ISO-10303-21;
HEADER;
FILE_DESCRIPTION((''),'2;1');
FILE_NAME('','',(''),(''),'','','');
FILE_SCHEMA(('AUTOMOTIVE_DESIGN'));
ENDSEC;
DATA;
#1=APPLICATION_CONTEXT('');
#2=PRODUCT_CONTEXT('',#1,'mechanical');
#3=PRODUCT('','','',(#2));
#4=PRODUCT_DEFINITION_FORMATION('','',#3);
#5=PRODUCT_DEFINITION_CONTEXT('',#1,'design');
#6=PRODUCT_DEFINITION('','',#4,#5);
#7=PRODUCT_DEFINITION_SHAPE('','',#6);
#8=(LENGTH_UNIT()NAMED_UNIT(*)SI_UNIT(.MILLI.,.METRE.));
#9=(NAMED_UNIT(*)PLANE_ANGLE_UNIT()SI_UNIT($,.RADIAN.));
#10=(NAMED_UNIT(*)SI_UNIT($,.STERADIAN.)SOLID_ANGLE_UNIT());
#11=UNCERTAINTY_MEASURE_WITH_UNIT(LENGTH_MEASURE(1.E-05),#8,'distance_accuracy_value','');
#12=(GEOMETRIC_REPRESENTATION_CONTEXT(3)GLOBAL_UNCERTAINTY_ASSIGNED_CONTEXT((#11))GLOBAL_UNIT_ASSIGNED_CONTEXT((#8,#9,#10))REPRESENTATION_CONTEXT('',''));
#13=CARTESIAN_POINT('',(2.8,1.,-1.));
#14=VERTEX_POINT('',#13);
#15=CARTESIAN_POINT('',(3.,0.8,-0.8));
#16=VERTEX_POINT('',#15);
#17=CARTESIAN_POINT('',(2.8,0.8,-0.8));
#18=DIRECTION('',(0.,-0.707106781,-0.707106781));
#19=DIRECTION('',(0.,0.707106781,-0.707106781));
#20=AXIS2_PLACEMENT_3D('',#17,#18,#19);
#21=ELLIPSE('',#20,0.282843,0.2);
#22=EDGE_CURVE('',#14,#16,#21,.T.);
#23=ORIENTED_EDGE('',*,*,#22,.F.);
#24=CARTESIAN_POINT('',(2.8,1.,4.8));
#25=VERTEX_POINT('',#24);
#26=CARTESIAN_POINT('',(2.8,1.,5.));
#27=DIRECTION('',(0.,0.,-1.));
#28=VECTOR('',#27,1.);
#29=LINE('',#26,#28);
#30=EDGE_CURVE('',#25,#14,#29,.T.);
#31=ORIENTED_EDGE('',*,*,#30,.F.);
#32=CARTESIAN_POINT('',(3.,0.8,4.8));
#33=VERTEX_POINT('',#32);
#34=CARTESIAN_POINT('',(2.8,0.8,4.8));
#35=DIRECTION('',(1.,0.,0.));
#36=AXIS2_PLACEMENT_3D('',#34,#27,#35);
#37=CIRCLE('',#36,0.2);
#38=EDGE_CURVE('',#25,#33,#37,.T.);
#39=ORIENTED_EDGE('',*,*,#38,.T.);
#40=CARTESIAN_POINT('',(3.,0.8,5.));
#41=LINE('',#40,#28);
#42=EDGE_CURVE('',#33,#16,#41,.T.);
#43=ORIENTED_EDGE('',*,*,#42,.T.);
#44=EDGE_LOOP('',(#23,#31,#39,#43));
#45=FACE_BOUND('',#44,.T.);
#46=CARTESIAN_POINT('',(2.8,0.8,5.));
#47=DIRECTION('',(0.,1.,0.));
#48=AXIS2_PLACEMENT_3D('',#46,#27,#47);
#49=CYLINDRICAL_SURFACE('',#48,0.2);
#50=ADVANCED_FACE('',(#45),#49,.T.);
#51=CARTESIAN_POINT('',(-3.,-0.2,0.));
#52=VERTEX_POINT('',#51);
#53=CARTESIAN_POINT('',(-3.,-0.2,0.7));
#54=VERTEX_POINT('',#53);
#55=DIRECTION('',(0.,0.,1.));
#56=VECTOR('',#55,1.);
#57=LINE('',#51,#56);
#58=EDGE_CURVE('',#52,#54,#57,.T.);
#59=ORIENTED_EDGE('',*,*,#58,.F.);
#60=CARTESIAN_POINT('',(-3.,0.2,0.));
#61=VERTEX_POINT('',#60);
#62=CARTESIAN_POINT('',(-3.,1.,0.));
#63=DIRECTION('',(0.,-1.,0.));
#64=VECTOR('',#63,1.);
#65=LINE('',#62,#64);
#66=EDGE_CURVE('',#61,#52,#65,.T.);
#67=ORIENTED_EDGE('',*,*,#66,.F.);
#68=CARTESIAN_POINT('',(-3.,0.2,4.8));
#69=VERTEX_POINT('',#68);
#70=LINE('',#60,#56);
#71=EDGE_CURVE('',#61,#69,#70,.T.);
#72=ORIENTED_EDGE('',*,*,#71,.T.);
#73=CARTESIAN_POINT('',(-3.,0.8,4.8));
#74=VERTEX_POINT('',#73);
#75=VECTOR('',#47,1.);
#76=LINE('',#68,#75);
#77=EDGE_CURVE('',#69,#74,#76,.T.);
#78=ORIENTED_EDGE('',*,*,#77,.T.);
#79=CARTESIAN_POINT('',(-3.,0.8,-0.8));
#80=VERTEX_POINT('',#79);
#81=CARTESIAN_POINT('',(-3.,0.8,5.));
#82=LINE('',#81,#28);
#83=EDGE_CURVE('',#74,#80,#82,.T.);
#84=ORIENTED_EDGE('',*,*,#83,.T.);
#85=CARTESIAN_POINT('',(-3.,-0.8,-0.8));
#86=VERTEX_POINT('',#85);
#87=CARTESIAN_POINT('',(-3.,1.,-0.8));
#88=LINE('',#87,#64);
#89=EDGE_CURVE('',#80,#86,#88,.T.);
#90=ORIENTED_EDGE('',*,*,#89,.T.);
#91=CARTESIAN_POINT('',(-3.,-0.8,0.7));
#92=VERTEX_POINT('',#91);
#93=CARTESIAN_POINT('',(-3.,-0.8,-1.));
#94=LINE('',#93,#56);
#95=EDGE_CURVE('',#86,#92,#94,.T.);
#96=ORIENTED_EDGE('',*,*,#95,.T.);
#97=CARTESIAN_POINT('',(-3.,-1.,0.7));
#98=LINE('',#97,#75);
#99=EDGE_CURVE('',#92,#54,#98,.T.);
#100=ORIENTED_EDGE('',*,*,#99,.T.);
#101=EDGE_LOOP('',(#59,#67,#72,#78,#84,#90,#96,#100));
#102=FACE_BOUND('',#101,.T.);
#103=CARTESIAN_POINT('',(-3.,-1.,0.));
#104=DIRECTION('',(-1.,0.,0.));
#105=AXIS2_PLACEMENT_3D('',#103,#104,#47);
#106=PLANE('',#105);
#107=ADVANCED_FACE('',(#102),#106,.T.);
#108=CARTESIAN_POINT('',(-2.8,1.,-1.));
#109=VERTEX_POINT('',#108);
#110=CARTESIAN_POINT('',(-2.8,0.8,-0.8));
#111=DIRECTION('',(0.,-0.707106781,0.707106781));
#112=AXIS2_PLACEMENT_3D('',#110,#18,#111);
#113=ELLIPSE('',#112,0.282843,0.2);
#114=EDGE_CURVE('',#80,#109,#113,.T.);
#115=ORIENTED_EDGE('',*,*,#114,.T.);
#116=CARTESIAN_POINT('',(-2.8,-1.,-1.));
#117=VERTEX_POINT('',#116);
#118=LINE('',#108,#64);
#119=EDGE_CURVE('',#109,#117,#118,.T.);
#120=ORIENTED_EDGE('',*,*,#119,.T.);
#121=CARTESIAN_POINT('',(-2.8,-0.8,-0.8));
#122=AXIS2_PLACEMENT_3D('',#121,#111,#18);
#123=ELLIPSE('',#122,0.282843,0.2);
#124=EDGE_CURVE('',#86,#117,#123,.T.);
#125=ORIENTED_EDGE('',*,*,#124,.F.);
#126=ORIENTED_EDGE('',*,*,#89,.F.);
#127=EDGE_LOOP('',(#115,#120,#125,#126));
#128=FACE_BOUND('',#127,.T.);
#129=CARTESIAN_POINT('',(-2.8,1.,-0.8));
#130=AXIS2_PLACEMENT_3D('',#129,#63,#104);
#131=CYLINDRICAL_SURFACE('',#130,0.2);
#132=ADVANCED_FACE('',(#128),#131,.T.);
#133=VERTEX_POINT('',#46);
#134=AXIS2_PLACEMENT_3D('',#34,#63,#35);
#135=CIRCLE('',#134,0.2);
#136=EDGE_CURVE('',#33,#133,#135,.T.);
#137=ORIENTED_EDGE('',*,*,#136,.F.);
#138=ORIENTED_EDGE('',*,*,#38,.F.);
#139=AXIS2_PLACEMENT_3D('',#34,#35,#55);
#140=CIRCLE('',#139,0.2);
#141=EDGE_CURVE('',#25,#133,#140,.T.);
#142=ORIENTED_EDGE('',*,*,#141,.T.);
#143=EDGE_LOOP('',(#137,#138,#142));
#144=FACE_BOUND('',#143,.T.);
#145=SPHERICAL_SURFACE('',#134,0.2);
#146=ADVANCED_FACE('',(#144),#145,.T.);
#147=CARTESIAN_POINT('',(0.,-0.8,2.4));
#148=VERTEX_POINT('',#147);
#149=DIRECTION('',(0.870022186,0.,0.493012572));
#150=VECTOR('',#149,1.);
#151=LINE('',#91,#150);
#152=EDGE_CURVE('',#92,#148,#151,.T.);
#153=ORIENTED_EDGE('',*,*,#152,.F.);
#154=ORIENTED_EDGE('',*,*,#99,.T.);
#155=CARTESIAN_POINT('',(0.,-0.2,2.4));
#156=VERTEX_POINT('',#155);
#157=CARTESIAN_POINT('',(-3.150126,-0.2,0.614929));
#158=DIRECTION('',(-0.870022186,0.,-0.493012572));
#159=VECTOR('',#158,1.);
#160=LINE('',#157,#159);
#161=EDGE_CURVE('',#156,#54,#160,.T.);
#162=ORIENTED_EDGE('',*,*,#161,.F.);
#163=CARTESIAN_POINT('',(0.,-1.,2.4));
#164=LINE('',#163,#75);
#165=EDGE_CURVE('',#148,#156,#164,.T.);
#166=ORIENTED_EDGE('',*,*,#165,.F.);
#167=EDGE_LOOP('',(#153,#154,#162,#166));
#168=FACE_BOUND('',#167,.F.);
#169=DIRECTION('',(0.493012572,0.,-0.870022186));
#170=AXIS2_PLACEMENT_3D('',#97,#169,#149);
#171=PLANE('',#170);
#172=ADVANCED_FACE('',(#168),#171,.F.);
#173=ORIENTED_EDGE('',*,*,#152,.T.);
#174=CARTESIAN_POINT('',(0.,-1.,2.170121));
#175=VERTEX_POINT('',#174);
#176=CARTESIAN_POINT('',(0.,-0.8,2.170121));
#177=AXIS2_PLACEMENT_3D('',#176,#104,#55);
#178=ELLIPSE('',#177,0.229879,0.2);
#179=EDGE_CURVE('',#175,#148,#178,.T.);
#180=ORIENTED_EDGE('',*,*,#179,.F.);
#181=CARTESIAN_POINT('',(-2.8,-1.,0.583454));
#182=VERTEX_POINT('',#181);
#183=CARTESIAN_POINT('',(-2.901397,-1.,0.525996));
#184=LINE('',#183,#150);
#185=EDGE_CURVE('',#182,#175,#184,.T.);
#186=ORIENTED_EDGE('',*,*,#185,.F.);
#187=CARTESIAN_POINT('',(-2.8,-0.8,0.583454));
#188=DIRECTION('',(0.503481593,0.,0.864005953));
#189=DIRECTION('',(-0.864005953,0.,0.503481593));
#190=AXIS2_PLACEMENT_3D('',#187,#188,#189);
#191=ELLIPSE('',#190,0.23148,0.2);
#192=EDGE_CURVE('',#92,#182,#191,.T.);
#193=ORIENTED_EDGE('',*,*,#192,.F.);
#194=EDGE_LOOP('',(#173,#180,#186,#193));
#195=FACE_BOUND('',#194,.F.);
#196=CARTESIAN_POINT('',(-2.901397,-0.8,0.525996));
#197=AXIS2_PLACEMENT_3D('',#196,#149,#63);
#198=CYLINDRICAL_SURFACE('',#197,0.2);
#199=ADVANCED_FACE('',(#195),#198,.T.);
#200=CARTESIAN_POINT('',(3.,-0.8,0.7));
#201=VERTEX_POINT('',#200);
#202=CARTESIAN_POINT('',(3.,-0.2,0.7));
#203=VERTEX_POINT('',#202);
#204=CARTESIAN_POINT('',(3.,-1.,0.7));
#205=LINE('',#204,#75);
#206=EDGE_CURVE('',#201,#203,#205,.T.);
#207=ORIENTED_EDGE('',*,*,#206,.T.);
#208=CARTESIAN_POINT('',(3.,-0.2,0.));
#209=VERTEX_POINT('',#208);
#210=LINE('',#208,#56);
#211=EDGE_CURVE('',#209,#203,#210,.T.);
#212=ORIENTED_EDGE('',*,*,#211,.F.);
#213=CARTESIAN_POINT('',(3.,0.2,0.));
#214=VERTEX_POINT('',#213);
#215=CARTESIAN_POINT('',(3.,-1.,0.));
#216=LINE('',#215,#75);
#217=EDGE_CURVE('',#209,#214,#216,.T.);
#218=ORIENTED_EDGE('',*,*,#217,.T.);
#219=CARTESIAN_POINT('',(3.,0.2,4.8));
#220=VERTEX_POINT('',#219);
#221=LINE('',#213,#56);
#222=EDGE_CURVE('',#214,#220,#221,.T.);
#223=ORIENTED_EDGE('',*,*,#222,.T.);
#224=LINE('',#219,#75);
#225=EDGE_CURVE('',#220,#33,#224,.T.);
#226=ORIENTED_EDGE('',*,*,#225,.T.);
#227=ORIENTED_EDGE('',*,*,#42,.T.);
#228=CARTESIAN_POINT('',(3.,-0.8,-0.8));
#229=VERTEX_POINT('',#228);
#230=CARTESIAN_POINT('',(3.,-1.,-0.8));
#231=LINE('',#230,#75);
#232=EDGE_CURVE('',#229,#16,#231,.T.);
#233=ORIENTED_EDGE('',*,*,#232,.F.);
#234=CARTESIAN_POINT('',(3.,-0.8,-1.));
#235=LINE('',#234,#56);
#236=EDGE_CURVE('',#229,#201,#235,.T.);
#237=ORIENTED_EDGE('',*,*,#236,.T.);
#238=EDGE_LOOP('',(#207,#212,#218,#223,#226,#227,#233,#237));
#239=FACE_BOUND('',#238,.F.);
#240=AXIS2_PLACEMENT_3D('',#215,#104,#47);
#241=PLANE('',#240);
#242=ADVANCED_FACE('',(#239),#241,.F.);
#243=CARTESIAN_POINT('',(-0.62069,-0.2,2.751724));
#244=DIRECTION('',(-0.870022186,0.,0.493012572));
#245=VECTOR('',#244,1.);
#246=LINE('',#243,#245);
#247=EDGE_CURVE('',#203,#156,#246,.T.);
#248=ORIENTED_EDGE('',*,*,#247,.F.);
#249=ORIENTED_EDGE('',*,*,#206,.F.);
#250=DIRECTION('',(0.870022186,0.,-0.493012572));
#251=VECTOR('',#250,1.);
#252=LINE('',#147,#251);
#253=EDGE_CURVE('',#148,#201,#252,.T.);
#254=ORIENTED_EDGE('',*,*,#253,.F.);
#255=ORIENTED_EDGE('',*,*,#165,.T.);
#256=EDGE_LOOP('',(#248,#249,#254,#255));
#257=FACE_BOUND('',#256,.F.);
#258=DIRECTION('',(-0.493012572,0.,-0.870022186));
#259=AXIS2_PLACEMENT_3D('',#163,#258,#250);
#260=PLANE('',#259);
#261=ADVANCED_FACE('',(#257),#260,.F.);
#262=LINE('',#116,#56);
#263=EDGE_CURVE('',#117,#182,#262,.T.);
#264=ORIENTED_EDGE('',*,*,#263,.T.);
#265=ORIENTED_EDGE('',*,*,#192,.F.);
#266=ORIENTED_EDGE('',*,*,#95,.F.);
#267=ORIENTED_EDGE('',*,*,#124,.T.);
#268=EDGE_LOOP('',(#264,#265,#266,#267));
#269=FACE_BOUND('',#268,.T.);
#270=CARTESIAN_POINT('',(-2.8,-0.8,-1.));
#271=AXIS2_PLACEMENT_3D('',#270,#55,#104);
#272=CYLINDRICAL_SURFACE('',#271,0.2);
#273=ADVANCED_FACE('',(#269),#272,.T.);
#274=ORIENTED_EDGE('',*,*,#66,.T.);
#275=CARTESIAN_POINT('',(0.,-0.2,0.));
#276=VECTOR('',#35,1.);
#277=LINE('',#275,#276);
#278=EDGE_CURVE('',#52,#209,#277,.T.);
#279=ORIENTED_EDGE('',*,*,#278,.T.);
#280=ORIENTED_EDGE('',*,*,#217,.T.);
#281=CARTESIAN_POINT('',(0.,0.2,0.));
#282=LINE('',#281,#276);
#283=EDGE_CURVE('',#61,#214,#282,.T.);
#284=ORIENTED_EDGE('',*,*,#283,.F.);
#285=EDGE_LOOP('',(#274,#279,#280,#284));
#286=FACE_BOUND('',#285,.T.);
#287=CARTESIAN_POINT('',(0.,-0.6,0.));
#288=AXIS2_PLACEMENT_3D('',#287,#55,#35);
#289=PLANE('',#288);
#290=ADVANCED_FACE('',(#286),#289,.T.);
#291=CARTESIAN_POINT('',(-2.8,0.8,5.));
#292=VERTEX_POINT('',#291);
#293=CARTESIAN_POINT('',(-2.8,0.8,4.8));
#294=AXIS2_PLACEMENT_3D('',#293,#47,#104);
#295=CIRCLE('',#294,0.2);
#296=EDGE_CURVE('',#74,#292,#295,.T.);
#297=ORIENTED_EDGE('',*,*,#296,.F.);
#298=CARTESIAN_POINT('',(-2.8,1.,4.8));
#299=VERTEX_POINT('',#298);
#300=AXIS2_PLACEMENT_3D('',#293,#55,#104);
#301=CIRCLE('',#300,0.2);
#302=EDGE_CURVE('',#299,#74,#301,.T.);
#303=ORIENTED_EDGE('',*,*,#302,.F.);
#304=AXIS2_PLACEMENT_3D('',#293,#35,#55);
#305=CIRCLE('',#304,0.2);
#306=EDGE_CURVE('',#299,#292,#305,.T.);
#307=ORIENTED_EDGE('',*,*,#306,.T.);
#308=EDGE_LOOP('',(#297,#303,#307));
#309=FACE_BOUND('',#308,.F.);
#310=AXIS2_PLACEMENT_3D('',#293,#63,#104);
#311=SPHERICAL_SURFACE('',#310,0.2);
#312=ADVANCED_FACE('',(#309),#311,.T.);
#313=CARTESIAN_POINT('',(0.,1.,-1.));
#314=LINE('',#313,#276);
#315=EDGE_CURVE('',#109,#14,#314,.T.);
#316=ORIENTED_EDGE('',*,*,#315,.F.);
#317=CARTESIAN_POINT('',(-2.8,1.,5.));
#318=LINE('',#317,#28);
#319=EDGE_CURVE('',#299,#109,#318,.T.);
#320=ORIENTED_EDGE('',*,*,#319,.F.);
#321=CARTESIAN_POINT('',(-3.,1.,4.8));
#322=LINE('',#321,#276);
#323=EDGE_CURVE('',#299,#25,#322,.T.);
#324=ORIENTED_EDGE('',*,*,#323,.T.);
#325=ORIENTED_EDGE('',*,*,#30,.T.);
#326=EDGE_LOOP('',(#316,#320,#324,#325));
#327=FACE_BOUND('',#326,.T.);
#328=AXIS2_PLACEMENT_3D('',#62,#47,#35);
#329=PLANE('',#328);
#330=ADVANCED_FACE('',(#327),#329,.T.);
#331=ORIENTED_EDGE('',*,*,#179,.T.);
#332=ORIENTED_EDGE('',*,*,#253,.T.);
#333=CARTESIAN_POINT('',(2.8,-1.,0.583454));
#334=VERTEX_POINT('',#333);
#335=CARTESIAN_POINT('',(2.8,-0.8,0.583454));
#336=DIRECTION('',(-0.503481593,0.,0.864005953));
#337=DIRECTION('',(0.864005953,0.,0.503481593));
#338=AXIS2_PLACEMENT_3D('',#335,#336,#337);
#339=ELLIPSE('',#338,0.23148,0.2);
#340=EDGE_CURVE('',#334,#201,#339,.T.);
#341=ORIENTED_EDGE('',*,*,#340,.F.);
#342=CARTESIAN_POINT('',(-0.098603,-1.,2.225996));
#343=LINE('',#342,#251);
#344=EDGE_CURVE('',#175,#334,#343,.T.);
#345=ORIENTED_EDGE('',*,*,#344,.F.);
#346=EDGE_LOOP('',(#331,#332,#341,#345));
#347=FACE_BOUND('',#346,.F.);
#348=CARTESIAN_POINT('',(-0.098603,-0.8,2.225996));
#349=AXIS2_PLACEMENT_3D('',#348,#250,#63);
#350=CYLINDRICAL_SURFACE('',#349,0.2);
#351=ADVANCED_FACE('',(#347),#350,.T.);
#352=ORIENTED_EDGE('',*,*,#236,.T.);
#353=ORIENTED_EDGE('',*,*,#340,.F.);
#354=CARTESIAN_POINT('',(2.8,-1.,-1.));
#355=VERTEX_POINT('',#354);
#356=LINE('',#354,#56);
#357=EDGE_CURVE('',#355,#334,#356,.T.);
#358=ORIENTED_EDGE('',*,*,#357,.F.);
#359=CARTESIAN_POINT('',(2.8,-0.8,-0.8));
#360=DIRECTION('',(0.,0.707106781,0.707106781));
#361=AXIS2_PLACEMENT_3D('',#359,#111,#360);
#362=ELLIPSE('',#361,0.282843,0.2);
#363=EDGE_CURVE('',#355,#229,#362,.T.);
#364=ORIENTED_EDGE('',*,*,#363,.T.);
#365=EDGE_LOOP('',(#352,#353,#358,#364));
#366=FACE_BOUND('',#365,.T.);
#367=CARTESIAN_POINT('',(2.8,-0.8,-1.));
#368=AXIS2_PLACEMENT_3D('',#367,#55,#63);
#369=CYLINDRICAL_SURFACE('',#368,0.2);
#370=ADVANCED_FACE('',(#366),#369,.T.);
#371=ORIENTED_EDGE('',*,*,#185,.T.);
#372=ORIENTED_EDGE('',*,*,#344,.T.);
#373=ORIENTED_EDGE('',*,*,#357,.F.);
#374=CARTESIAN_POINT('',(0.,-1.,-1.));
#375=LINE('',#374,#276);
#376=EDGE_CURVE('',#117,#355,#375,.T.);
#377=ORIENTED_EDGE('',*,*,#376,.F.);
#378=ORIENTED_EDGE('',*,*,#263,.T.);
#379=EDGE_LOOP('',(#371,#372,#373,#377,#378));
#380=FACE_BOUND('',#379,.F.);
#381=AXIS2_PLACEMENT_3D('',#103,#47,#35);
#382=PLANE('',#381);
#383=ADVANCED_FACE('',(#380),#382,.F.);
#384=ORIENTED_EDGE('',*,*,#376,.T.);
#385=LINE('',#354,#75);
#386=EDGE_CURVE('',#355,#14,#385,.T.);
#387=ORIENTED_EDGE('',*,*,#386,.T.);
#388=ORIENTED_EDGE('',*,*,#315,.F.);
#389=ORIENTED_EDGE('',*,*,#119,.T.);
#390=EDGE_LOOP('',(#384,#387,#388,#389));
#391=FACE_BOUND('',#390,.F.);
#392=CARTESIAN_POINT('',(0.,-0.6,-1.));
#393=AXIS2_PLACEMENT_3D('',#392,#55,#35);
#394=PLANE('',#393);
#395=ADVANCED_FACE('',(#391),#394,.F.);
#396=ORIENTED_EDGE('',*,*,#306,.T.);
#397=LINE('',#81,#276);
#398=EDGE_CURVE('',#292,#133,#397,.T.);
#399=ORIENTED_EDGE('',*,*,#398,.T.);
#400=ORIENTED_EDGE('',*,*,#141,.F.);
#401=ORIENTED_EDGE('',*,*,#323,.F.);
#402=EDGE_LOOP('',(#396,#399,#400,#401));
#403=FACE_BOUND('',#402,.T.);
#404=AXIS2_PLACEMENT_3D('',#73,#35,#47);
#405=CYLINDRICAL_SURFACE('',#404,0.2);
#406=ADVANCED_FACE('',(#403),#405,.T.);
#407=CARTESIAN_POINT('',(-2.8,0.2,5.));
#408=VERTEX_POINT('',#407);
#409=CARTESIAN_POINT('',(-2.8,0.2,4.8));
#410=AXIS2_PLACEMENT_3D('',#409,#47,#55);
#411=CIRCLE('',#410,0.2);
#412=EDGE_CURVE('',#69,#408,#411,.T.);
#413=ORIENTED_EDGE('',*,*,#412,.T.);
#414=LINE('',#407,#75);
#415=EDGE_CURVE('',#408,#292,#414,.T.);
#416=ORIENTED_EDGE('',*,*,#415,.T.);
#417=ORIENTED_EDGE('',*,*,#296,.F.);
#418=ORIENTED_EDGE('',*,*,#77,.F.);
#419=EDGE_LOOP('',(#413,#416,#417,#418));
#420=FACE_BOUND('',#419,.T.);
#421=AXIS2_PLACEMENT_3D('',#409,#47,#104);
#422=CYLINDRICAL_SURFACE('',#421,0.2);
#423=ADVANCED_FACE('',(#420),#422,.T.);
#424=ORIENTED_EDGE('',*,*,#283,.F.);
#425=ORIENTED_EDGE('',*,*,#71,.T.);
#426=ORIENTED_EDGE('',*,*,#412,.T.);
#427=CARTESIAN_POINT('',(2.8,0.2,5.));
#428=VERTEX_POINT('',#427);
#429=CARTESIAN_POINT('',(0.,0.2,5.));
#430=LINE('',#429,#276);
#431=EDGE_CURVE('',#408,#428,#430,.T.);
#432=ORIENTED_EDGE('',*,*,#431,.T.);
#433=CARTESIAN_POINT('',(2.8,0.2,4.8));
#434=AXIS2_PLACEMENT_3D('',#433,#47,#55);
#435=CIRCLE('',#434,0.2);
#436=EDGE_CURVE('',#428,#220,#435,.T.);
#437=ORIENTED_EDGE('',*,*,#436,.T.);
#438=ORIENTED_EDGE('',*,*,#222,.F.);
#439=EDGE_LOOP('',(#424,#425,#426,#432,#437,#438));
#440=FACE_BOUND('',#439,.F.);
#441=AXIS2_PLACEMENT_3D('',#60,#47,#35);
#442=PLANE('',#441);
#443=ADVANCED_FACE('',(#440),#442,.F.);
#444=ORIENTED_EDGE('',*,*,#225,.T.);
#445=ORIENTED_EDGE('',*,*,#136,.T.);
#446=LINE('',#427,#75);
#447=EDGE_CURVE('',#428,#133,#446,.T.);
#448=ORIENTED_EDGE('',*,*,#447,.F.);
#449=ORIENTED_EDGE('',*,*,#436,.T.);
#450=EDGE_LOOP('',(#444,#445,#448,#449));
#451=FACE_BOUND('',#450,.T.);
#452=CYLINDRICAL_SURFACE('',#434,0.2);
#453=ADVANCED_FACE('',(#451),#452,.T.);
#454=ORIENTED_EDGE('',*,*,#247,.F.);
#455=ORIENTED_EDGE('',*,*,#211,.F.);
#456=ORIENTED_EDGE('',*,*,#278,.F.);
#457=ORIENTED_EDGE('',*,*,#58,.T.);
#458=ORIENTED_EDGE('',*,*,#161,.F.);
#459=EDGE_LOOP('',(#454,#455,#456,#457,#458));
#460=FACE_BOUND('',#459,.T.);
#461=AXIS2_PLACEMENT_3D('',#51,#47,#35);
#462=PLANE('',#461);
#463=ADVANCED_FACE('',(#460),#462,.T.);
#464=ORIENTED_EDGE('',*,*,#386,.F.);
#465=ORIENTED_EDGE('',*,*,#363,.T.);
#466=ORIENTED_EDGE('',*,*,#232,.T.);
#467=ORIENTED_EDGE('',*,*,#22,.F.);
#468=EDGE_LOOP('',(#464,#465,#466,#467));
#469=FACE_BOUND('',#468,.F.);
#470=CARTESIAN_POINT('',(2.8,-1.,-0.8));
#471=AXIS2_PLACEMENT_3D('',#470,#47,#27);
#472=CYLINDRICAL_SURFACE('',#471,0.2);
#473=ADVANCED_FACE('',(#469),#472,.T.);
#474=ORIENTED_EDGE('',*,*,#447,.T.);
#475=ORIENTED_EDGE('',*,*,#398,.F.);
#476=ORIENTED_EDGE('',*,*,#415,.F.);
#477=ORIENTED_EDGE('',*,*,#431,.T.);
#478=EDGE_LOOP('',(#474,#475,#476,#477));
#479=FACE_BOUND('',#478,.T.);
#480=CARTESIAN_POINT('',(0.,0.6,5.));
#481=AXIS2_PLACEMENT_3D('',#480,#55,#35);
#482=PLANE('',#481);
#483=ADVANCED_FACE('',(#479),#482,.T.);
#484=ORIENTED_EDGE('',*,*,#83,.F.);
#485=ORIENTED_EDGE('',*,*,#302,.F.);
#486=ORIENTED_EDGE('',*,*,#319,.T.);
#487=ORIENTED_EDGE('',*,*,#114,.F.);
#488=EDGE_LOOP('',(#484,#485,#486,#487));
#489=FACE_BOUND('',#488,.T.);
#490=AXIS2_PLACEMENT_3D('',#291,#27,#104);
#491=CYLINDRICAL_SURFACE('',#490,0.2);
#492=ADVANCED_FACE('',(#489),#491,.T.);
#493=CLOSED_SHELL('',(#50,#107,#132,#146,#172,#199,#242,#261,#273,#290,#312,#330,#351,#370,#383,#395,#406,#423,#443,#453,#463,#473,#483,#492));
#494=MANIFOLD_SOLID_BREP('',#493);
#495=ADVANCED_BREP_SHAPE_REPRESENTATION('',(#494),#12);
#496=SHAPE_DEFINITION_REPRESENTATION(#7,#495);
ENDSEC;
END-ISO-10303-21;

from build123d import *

# Parameters (mm, degrees)
F0_W     = 6
F0_H     = 0.8
F0_H_2   = 0.4
F1_DEPTH = 1
F2_DEPTH = 5
F3_DEPTH = 2.4
F5_DEPTH = 1
F6_R     = 0.2


with BuildPart() as f1:
    # F0 (on Top) → F1 (new body)
    with BuildSketch(Plane.XY):
        with Locations((0, -0.6)):
            Rectangle(F0_W, F0_H)
        Rectangle(F0_W, F0_H_2)
        with Locations((0, 0.6)):
            Rectangle(F0_W, F0_H)
    extrude(amount=-F1_DEPTH)

    # F0 (on Top) → F2 (join)
    with BuildSketch(Plane.XY):
        with Locations((0, 0.6)):
            Rectangle(F0_W, F0_H)
    extrude(amount=F2_DEPTH)

    # F0 (on Top) → F3 (join)
    with BuildSketch(Plane.XY):
        with Locations((0, -0.6)):
            Rectangle(F0_W, F0_H)
    extrude(amount=F3_DEPTH)

    # F4 (on face) → F5 (cut)
    with BuildSketch(Plane.XZ.offset(1)):
        Polygon((-3, 2.4), (-3, 0.7), (0, 2.4), align=None)
        Polygon((3, 2.4), (0, 2.4), (3, 0.7), align=None)
    extrude(amount=-F5_DEPTH, mode=Mode.SUBTRACT)

    # F6
    f6_edges = [f1.edges().sort_by_distance(p)[0] for p in [
        (3, 0.6, 5),
        (-3, 0.6, 5),
        (3, 0, -1),
        (-3, 0, -1),
        (3, 1, 2),
        (-3, 1, 2),
        (3, -1, -0.15),
        (-3, -1, -0.15),
        (-1.5, -1, 1.55),
        (1.5, -1, 1.55),
        (0, 1, 5),
    ]]
    fillet(f6_edges, radius=F6_R)


solid = f1.part
